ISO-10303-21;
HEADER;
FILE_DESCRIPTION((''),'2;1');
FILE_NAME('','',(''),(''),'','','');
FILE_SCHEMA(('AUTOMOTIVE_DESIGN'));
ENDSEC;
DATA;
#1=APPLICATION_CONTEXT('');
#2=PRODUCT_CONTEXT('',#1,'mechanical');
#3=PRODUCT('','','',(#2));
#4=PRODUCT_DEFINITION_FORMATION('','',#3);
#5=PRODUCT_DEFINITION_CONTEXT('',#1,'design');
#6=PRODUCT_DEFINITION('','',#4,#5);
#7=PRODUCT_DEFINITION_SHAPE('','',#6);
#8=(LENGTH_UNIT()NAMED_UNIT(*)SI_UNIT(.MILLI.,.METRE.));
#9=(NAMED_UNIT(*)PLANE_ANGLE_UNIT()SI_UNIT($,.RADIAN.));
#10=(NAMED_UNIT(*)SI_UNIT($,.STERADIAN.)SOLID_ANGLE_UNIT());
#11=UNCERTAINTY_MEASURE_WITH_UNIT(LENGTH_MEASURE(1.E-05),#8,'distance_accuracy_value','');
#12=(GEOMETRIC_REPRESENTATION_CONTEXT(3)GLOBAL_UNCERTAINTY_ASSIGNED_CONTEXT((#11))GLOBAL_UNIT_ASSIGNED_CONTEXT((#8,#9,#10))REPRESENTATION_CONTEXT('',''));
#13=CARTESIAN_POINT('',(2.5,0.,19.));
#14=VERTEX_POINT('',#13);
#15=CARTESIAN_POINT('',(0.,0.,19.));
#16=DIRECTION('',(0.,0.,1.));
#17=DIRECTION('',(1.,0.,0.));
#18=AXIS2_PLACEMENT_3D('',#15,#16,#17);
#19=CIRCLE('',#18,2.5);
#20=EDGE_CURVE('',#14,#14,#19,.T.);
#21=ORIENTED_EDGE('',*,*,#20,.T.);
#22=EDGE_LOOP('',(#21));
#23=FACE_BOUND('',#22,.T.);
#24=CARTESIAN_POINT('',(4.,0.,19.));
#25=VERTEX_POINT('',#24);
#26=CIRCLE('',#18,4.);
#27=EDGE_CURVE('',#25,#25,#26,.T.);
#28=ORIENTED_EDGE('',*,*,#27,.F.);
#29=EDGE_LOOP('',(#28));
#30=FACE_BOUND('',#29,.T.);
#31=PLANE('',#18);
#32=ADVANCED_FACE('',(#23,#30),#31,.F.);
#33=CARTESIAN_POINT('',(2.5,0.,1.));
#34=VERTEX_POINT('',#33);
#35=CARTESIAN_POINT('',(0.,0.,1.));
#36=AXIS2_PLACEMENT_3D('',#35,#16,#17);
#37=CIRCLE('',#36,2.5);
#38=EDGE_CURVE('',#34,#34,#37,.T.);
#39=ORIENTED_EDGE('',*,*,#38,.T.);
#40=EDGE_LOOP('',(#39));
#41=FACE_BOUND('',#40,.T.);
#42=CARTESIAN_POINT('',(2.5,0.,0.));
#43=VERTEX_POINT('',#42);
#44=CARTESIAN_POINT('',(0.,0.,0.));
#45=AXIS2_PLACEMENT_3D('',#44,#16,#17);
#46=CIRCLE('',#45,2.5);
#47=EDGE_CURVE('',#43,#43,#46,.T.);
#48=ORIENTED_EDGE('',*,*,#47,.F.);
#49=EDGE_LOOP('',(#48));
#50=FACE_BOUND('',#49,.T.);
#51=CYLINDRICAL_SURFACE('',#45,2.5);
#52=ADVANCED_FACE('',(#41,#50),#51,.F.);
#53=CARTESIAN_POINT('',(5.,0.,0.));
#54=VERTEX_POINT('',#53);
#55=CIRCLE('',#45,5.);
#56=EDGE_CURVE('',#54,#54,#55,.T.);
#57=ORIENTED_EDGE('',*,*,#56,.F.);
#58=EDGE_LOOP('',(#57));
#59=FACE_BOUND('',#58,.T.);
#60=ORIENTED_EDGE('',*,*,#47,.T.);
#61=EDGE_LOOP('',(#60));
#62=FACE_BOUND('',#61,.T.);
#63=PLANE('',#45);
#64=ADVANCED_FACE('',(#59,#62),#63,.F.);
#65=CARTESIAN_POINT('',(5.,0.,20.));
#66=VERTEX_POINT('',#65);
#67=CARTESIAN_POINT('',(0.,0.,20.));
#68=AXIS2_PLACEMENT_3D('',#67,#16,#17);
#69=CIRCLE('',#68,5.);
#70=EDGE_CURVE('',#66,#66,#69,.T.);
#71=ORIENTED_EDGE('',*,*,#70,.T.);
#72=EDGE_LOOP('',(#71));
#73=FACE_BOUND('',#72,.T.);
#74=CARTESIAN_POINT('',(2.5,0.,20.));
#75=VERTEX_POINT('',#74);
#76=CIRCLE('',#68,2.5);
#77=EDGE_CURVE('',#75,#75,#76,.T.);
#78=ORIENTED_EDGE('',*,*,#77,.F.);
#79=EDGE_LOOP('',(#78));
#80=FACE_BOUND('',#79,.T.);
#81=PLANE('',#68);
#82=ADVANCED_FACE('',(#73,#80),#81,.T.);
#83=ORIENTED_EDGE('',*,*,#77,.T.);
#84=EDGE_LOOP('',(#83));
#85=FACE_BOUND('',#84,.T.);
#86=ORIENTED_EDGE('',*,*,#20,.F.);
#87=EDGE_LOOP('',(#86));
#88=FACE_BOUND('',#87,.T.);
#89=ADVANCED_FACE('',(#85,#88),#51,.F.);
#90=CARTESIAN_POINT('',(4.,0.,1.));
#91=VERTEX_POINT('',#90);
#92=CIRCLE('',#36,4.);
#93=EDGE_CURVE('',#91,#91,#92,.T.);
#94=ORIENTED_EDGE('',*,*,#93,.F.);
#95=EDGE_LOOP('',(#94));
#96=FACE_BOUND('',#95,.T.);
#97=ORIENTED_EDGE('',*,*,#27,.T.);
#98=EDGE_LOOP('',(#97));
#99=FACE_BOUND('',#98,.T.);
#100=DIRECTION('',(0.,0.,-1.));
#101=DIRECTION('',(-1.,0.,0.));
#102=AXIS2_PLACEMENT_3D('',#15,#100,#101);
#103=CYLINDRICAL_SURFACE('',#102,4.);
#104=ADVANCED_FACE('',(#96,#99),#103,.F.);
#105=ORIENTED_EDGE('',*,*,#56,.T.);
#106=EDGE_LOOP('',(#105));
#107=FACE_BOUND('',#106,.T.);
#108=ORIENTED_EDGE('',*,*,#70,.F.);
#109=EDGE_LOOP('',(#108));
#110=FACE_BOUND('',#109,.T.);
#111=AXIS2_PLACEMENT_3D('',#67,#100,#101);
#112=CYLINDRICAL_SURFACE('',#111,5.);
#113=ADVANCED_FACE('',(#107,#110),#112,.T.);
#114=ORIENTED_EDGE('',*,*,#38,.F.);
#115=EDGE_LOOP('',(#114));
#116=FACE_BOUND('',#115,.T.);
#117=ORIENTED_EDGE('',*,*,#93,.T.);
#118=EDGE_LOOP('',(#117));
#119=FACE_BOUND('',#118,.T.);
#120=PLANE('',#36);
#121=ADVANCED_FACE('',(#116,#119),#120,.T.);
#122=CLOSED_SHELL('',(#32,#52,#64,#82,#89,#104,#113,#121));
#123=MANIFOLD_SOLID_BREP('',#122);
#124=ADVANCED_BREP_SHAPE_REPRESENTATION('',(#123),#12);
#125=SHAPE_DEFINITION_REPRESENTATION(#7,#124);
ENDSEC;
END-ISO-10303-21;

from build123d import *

# Parameters (mm, degrees)
SKETCH_2_R          = 2.5
CUT_EXTRUDE_1_DEPTH = 22.213203436


# Read off the part's stored shape, not the designer's step: 拉伸-薄壁1
with BuildPart() as part:
    # 拉伸-薄壁1 outline → 拉伸-薄壁1 (revolve)
    with BuildSketch(Plane.XZ):
        Polygon((5, 20), (0, 20), (0, 19), (4, 19), (4, 1), (0, 1), (0, 0), (5, 0), align=None)
    revolve(axis=Axis((0, 0, 0), (0, 0, 1)))

    # 草图2 → 切除-拉伸1 (cut, through all)
    with BuildSketch(Plane.XY.offset(20)):
        Circle(SKETCH_2_R)
    extrude(amount=-CUT_EXTRUDE_1_DEPTH, mode=Mode.SUBTRACT)


solid = part.part
